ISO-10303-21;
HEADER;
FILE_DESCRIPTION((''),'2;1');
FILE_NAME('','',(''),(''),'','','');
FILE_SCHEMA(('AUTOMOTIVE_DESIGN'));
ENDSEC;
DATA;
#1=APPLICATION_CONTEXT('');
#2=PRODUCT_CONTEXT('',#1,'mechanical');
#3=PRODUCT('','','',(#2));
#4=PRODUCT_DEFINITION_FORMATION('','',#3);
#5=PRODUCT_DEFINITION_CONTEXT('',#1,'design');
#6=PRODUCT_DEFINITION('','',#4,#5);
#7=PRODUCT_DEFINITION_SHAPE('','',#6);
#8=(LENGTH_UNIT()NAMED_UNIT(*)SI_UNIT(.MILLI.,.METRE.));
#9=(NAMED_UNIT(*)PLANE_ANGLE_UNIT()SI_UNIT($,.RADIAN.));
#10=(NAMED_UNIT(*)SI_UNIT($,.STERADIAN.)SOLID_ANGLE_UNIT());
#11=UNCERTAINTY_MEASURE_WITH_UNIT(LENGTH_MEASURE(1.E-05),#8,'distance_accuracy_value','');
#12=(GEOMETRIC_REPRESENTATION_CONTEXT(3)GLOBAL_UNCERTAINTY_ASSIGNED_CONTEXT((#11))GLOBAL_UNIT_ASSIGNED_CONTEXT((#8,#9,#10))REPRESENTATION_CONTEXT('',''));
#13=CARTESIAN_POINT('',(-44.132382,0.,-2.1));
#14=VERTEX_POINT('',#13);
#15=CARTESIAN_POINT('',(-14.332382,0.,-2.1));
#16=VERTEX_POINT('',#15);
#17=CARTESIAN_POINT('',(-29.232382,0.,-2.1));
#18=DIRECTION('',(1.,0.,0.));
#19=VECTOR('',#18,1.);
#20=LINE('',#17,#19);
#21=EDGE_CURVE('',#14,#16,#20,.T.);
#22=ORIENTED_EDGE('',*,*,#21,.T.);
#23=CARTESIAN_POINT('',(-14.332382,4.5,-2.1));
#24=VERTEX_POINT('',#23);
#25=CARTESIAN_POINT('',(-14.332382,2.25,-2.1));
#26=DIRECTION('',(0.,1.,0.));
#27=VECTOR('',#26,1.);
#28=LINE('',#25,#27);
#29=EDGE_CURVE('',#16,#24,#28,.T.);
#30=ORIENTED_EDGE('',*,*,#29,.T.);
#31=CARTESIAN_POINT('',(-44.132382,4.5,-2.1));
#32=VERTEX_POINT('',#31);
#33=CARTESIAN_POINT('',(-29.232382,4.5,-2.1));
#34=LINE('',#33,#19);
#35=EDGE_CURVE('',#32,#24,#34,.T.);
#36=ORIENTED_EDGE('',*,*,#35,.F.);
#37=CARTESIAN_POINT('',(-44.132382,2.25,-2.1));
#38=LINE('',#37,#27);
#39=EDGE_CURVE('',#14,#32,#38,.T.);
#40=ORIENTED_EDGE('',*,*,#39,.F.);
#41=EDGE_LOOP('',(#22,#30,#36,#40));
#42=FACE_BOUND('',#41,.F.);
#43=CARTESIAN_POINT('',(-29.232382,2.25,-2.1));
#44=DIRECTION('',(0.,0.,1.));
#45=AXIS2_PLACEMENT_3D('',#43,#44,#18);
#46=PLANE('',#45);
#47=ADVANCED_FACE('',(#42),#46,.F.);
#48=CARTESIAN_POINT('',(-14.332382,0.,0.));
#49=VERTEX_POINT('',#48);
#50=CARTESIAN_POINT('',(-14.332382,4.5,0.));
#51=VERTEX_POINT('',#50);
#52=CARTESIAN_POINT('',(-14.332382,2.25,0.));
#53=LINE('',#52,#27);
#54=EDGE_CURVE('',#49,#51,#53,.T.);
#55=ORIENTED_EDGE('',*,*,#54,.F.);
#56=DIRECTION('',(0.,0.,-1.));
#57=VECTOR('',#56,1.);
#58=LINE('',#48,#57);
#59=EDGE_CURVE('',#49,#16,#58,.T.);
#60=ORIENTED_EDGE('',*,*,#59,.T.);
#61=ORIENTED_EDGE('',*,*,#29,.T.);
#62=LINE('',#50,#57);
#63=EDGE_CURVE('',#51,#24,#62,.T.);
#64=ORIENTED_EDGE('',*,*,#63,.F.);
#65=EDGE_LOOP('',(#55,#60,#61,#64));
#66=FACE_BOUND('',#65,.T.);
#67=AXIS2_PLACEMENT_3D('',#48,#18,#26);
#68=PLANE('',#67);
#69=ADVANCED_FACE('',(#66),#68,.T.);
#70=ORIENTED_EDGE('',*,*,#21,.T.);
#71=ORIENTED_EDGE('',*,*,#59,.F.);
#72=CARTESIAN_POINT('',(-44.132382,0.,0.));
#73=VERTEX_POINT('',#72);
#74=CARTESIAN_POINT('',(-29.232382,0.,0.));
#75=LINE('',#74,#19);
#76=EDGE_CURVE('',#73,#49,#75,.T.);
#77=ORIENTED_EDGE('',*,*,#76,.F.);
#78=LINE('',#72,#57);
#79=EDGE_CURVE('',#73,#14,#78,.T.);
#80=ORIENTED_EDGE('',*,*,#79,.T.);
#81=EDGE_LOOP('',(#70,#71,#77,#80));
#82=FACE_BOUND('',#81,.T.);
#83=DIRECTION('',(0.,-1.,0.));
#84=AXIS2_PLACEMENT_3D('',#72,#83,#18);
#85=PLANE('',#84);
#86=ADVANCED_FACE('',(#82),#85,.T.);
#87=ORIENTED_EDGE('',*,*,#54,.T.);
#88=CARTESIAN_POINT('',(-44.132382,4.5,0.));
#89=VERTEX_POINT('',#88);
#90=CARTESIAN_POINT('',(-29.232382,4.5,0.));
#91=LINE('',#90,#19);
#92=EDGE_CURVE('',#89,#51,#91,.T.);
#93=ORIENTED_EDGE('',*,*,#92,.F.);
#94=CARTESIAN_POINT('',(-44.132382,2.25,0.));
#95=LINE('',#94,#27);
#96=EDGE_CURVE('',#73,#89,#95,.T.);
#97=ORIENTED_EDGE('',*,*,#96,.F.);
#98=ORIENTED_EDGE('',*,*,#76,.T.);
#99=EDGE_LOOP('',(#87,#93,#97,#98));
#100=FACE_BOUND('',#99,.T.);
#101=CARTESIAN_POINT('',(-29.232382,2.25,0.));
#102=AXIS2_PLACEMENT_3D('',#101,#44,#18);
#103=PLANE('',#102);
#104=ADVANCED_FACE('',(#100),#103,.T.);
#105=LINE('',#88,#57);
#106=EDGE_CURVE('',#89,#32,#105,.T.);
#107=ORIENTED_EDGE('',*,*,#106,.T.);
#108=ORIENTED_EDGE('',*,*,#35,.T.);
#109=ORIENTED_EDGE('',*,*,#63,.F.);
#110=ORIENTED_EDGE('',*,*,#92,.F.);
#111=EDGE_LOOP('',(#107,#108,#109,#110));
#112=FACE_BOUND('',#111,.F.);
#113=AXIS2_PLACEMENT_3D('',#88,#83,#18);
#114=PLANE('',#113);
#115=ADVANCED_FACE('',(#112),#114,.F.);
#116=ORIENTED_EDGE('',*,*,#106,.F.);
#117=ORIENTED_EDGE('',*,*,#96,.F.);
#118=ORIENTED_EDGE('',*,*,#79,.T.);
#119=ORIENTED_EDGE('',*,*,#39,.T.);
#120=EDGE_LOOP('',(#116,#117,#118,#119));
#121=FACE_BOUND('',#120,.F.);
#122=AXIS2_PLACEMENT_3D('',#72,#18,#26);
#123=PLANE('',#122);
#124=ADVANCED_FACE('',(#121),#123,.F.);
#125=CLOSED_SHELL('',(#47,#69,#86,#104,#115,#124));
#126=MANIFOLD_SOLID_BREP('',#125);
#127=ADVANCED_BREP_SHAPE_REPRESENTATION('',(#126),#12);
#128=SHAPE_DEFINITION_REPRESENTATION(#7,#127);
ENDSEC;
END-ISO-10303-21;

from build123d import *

# Parameters (mm, degrees)
F1_E0_W  = 29.8
F1_E0_H  = 4.5
F2_DEPTH = 2.1


with BuildPart() as f2:
    # F1_E0 (on explicit) → F2 (new body)
    with BuildSketch(Plane(origin=(-44.1323819277, 0, 0), x_dir=(1, 0, 0), z_dir=(0, 0, 1))):
        with Locations((14.9, 2.25)):
            Rectangle(F1_E0_W, F1_E0_H)
    extrude(amount=-F2_DEPTH)


solid = f2.part
